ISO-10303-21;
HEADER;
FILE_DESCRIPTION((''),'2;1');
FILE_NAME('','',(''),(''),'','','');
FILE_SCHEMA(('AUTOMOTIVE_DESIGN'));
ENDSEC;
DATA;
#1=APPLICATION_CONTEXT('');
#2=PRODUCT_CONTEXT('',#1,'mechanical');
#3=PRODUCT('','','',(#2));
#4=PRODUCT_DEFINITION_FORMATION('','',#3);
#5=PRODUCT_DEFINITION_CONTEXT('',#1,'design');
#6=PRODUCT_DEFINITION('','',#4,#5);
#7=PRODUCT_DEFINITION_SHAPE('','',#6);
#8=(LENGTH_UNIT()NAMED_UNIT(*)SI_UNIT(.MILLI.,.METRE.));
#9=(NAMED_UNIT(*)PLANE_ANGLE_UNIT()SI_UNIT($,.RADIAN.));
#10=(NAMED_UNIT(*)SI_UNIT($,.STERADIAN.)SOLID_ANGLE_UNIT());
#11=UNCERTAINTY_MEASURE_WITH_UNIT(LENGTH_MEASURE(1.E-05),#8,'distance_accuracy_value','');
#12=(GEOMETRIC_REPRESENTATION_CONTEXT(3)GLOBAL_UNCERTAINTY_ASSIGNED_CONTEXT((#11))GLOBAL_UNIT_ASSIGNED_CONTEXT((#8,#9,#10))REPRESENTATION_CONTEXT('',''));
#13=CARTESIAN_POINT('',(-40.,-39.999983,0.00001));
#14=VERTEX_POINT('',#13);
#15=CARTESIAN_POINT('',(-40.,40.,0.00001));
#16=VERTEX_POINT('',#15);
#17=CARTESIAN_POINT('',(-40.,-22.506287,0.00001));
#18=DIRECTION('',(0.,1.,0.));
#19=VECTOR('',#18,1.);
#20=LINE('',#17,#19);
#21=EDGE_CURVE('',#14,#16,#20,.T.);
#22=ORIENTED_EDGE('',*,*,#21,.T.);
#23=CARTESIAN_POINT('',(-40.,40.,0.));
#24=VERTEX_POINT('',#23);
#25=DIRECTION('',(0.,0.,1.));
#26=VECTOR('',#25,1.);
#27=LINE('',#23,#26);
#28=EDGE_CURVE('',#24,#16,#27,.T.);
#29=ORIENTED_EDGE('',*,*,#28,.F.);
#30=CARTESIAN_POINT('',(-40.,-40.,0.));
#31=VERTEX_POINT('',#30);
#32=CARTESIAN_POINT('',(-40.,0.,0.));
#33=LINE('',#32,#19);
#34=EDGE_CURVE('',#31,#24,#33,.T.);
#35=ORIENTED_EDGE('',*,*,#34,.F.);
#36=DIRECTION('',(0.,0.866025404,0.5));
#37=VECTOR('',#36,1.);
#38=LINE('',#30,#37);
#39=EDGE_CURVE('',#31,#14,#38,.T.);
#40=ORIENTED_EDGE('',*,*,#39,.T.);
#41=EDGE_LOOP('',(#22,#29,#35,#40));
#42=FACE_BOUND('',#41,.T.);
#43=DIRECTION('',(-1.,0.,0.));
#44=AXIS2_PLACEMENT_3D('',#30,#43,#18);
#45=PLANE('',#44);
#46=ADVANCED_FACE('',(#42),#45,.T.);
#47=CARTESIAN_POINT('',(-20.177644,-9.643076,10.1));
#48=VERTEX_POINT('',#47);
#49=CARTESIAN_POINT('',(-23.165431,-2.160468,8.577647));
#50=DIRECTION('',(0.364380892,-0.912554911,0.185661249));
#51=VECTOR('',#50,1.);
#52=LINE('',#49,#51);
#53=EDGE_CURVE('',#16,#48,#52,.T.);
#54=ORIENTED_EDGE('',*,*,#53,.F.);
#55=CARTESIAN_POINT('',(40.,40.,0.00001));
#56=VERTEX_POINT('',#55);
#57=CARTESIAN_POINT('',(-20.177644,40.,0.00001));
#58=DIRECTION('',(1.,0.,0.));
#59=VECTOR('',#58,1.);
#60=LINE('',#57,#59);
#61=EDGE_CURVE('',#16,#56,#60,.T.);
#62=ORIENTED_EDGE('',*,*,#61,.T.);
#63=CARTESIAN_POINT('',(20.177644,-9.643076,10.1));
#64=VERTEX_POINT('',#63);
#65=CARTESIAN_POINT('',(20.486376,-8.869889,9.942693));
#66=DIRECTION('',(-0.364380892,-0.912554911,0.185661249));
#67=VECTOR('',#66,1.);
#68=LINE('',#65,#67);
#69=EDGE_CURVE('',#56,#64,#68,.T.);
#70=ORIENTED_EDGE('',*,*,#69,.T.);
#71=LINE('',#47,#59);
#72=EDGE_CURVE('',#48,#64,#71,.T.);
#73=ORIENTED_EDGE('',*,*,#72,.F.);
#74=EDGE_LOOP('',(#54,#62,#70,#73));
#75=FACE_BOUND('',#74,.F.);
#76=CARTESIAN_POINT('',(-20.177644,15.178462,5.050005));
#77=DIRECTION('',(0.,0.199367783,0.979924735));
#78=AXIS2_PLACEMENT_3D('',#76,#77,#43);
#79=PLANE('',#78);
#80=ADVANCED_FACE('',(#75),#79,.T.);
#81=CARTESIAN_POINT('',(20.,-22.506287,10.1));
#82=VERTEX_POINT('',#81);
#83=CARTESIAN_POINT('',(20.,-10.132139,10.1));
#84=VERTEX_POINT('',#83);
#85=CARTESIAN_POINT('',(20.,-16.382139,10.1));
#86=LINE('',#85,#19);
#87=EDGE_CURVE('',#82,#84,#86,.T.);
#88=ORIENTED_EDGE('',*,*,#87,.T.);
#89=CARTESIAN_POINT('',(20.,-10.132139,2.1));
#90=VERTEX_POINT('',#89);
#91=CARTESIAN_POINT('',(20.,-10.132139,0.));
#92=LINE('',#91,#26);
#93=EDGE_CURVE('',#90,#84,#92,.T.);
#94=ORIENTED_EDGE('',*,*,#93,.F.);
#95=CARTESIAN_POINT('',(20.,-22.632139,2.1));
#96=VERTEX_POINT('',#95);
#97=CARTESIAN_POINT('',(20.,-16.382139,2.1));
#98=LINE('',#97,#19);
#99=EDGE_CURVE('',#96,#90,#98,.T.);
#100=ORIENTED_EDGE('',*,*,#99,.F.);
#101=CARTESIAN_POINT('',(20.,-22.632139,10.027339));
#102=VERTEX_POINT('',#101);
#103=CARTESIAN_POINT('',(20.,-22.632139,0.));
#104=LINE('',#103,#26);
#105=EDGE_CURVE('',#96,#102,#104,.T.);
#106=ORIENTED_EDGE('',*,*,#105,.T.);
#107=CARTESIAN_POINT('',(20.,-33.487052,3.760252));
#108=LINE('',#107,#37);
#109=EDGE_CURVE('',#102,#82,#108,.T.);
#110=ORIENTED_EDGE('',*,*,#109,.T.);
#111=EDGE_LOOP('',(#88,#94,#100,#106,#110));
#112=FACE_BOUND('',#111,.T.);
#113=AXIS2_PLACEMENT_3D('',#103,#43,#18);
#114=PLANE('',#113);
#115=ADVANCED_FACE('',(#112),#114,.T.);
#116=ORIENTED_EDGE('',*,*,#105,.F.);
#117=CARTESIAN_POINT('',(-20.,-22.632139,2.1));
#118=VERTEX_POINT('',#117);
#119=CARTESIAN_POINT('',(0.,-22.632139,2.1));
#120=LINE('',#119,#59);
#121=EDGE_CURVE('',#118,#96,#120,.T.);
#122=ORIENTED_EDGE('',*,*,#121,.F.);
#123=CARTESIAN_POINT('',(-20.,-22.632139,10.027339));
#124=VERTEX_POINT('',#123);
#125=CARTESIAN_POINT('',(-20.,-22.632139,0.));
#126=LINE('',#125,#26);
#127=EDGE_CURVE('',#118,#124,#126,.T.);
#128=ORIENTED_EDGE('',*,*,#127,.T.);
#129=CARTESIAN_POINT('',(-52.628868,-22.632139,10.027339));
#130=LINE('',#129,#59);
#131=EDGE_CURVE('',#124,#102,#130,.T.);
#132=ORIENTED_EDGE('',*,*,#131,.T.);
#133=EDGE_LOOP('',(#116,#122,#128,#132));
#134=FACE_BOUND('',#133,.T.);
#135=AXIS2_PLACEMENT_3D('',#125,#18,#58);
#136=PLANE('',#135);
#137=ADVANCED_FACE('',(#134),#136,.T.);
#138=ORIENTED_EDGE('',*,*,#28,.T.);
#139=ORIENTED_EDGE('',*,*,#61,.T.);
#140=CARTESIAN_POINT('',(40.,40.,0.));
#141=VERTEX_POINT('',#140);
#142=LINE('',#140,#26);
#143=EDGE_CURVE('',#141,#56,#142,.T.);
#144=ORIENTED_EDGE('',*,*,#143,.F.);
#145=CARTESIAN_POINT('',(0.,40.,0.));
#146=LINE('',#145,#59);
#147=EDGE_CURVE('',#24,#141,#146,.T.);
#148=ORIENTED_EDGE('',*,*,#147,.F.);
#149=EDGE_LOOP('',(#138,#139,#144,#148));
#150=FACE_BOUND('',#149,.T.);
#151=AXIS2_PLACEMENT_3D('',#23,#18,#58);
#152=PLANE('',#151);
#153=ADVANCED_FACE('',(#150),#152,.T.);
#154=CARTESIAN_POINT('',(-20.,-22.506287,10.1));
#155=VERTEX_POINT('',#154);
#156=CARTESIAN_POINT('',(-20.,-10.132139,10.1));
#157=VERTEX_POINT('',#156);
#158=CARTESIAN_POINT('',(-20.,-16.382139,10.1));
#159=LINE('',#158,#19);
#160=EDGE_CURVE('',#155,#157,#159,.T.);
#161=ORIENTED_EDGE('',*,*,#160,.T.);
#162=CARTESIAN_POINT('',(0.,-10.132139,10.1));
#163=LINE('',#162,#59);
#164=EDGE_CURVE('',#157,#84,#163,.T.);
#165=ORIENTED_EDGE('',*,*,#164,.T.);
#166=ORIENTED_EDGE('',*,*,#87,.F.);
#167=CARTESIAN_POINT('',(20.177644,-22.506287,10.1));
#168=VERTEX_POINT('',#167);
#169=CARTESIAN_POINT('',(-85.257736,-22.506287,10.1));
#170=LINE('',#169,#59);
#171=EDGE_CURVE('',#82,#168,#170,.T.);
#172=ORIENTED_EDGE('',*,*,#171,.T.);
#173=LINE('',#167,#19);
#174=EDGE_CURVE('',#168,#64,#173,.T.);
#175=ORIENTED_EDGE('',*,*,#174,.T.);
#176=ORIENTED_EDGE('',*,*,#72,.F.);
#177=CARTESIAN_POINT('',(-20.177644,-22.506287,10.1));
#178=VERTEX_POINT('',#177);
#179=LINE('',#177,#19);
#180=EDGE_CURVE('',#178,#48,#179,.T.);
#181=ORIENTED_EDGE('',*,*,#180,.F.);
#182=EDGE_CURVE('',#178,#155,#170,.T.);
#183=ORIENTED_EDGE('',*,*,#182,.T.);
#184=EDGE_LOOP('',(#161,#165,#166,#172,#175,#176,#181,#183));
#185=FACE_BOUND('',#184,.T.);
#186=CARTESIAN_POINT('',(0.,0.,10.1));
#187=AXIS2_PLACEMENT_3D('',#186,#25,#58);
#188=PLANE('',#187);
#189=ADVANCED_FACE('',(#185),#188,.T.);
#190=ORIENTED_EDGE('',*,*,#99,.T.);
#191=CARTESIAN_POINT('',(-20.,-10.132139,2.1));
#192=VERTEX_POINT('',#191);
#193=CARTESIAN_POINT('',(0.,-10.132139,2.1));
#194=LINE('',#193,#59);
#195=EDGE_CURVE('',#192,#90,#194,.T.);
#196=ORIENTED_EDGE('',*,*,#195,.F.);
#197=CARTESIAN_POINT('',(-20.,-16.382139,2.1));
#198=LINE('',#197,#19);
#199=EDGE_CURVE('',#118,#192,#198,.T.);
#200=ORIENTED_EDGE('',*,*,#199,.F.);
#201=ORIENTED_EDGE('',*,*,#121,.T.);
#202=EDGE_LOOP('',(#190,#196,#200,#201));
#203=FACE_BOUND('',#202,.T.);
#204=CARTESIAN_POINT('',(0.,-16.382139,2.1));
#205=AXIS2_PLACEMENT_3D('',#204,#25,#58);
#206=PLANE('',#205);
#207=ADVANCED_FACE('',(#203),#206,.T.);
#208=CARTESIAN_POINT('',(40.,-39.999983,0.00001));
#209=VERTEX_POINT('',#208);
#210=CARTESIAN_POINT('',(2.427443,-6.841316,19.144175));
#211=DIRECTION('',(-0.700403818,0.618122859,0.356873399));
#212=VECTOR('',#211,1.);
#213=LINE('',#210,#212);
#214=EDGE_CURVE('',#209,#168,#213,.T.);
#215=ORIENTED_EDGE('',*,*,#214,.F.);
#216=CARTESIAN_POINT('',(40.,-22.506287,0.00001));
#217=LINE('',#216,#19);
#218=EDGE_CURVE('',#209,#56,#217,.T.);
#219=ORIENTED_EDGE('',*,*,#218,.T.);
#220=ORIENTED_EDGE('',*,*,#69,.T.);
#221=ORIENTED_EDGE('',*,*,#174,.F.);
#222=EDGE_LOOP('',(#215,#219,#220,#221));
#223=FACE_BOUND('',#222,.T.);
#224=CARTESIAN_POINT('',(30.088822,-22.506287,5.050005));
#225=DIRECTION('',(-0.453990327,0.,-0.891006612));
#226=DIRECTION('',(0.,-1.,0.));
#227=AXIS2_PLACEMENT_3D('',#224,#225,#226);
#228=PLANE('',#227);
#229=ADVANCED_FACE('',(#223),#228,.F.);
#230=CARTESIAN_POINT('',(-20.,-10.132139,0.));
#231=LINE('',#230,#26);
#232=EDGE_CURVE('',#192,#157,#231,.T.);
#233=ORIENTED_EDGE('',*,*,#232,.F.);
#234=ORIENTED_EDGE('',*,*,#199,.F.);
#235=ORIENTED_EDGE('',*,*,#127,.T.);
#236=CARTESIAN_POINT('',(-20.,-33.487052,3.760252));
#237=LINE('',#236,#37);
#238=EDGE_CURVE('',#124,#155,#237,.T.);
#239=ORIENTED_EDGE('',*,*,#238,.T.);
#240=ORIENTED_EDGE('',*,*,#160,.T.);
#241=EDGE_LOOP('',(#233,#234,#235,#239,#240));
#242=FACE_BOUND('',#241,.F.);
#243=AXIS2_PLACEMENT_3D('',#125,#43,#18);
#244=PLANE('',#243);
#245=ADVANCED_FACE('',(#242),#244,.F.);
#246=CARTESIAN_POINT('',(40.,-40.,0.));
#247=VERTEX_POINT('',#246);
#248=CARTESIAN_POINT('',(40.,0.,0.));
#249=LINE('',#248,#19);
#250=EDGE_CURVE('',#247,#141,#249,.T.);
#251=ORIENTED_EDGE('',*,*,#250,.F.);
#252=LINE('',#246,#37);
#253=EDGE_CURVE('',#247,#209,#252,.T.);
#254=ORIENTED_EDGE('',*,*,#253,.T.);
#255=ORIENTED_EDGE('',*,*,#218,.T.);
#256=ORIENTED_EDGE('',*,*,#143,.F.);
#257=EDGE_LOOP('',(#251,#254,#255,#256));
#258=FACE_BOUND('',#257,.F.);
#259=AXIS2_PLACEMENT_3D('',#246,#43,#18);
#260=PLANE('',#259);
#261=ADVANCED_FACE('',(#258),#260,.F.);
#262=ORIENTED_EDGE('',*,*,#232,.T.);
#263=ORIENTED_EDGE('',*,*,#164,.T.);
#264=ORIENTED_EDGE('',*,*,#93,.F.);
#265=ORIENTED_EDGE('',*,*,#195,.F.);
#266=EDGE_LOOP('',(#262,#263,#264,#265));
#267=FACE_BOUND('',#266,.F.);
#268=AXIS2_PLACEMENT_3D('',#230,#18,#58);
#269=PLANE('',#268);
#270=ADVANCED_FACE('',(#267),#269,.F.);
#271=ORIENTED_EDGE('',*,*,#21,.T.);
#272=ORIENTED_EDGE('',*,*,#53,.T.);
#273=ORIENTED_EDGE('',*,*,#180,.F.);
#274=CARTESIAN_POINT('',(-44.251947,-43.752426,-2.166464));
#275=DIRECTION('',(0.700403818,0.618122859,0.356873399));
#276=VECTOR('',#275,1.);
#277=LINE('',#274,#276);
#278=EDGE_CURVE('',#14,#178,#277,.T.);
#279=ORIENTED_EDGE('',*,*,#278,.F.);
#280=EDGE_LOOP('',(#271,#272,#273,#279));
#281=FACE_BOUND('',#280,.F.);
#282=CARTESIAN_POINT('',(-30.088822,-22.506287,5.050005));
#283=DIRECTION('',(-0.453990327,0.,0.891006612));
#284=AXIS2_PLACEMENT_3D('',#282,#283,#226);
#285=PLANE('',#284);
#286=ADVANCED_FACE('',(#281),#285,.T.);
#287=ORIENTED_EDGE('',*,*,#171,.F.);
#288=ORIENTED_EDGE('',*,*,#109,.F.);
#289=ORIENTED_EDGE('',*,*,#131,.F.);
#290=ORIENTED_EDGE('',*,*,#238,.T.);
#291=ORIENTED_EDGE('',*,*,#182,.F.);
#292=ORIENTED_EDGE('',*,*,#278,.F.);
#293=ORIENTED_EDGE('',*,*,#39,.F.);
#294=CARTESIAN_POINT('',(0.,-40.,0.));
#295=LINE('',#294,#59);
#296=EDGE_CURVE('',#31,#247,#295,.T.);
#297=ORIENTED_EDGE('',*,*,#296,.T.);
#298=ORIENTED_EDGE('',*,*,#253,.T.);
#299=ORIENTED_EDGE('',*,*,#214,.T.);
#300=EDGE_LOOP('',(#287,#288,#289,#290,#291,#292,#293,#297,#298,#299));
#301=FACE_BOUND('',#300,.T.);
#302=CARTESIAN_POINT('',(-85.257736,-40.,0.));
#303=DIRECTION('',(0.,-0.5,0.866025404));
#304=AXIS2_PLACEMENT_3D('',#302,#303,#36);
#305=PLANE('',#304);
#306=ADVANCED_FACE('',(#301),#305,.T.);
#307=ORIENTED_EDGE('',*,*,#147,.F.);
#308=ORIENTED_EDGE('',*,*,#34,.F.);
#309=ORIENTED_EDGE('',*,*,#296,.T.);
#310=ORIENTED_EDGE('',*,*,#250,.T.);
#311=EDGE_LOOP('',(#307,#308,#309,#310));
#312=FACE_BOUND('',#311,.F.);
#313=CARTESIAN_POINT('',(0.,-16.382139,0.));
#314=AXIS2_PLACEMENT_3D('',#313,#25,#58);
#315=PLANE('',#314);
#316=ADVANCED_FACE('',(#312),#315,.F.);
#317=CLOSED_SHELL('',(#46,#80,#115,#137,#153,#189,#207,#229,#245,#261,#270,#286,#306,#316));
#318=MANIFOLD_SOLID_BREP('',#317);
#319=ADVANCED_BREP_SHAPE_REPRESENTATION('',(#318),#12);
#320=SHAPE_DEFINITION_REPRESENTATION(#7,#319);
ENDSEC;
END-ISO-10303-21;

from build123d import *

# Parameters (mm, degrees)
F0_W        = 80
F0_H        = 80
F0_W_2      = 40
F0_H_2      = 12.5
F1_DEPTH    = 10.1
F2_T1_DEPTH = 170.5154722058
F3_SIZE2    = 19.822356
F3_SIZE     = 10.09999
F3_2_SIZE2  = 19.822356
F3_2_SIZE   = 10.09999
F4_SIZE2    = 49.643076
F4_SIZE     = 10.09999
F5_DEPTH    = 2.1


# Not quite as in the source:
# - a fillet or chamfer that OpenCascade refuses, or shapes differently, is made with other operations: its cross-section is extruded or revolved along the edge and cut away or added
# - a fillet or chamfer is up to 0.001 mm smaller than in the source, because OpenCascade refuses the exact size


with BuildPart() as f1:
    # F0 (on Top) → F1 (new body)
    with BuildSketch(Plane.XY):
        Rectangle(F0_W, F0_H)
        with Locations((0, -16.3821391761)):
            Rectangle(F0_W_2, F0_H_2, mode=Mode.SUBTRACT)
    extrude(amount=F1_DEPTH)

    # F2: chamfer of 10.1 x 17.4937131564 on 1 edges, made by hand

    # F2_s2 → F2_t1 (cut)
    with BuildSketch(Plane.YZ.offset(-85.2577361029)):
        Polygon((-40, 0), (-22.5062868436, 10.1), (-40, 10.1), align=None)
    extrude(amount=F2_T1_DEPTH, mode=Mode.SUBTRACT)

    # F3 (size 10.1 and 19.8223661056 in the source; OpenCascade refuses exactly that, so slightly less here)
    f3_edges = [f1.edges().sort_by_distance(p)[0] for p in [
        (-40, 8.746857, 10.1),
    ]]
    f3_side = f1.faces().sort_by_distance((-40, 4.194471, 4.843358))[0]
    chamfer(f3_edges, length=F3_SIZE, length2=F3_SIZE2, reference=f3_side)

    # F3#2 (size 10.1 and 19.8223661056 in the source; OpenCascade refuses exactly that, so slightly less here)
    f3_2_edges = [f1.edges().sort_by_distance(p)[0] for p in [
        (40, 8.746857, 10.1),
    ]]
    f3_2_side = f1.faces().sort_by_distance((40, 4.194471, 4.843358))[0]
    chamfer(f3_2_edges, length=F3_2_SIZE, length2=F3_2_SIZE2, reference=f3_2_side)

    # F4 (size 10.1 and 49.6430860138 in the source; OpenCascade refuses exactly that, so slightly less here)
    f4_edges = [f1.edges().sort_by_distance(p)[0] for p in [
        (0, 40, 10.1),
    ]]
    f4_side = f1.faces().sort_by_distance((0, 40, 4.495514))[0]
    chamfer(f4_edges, length=F4_SIZE, length2=F4_SIZE2, reference=f4_side)

    # F0 (on Top) → F5 (join)
    with BuildSketch(Plane.XY):
        with Locations((0, -16.3821391761)):
            Rectangle(F0_W_2, F0_H_2)
    extrude(amount=F5_DEPTH)


solid = f1.part
